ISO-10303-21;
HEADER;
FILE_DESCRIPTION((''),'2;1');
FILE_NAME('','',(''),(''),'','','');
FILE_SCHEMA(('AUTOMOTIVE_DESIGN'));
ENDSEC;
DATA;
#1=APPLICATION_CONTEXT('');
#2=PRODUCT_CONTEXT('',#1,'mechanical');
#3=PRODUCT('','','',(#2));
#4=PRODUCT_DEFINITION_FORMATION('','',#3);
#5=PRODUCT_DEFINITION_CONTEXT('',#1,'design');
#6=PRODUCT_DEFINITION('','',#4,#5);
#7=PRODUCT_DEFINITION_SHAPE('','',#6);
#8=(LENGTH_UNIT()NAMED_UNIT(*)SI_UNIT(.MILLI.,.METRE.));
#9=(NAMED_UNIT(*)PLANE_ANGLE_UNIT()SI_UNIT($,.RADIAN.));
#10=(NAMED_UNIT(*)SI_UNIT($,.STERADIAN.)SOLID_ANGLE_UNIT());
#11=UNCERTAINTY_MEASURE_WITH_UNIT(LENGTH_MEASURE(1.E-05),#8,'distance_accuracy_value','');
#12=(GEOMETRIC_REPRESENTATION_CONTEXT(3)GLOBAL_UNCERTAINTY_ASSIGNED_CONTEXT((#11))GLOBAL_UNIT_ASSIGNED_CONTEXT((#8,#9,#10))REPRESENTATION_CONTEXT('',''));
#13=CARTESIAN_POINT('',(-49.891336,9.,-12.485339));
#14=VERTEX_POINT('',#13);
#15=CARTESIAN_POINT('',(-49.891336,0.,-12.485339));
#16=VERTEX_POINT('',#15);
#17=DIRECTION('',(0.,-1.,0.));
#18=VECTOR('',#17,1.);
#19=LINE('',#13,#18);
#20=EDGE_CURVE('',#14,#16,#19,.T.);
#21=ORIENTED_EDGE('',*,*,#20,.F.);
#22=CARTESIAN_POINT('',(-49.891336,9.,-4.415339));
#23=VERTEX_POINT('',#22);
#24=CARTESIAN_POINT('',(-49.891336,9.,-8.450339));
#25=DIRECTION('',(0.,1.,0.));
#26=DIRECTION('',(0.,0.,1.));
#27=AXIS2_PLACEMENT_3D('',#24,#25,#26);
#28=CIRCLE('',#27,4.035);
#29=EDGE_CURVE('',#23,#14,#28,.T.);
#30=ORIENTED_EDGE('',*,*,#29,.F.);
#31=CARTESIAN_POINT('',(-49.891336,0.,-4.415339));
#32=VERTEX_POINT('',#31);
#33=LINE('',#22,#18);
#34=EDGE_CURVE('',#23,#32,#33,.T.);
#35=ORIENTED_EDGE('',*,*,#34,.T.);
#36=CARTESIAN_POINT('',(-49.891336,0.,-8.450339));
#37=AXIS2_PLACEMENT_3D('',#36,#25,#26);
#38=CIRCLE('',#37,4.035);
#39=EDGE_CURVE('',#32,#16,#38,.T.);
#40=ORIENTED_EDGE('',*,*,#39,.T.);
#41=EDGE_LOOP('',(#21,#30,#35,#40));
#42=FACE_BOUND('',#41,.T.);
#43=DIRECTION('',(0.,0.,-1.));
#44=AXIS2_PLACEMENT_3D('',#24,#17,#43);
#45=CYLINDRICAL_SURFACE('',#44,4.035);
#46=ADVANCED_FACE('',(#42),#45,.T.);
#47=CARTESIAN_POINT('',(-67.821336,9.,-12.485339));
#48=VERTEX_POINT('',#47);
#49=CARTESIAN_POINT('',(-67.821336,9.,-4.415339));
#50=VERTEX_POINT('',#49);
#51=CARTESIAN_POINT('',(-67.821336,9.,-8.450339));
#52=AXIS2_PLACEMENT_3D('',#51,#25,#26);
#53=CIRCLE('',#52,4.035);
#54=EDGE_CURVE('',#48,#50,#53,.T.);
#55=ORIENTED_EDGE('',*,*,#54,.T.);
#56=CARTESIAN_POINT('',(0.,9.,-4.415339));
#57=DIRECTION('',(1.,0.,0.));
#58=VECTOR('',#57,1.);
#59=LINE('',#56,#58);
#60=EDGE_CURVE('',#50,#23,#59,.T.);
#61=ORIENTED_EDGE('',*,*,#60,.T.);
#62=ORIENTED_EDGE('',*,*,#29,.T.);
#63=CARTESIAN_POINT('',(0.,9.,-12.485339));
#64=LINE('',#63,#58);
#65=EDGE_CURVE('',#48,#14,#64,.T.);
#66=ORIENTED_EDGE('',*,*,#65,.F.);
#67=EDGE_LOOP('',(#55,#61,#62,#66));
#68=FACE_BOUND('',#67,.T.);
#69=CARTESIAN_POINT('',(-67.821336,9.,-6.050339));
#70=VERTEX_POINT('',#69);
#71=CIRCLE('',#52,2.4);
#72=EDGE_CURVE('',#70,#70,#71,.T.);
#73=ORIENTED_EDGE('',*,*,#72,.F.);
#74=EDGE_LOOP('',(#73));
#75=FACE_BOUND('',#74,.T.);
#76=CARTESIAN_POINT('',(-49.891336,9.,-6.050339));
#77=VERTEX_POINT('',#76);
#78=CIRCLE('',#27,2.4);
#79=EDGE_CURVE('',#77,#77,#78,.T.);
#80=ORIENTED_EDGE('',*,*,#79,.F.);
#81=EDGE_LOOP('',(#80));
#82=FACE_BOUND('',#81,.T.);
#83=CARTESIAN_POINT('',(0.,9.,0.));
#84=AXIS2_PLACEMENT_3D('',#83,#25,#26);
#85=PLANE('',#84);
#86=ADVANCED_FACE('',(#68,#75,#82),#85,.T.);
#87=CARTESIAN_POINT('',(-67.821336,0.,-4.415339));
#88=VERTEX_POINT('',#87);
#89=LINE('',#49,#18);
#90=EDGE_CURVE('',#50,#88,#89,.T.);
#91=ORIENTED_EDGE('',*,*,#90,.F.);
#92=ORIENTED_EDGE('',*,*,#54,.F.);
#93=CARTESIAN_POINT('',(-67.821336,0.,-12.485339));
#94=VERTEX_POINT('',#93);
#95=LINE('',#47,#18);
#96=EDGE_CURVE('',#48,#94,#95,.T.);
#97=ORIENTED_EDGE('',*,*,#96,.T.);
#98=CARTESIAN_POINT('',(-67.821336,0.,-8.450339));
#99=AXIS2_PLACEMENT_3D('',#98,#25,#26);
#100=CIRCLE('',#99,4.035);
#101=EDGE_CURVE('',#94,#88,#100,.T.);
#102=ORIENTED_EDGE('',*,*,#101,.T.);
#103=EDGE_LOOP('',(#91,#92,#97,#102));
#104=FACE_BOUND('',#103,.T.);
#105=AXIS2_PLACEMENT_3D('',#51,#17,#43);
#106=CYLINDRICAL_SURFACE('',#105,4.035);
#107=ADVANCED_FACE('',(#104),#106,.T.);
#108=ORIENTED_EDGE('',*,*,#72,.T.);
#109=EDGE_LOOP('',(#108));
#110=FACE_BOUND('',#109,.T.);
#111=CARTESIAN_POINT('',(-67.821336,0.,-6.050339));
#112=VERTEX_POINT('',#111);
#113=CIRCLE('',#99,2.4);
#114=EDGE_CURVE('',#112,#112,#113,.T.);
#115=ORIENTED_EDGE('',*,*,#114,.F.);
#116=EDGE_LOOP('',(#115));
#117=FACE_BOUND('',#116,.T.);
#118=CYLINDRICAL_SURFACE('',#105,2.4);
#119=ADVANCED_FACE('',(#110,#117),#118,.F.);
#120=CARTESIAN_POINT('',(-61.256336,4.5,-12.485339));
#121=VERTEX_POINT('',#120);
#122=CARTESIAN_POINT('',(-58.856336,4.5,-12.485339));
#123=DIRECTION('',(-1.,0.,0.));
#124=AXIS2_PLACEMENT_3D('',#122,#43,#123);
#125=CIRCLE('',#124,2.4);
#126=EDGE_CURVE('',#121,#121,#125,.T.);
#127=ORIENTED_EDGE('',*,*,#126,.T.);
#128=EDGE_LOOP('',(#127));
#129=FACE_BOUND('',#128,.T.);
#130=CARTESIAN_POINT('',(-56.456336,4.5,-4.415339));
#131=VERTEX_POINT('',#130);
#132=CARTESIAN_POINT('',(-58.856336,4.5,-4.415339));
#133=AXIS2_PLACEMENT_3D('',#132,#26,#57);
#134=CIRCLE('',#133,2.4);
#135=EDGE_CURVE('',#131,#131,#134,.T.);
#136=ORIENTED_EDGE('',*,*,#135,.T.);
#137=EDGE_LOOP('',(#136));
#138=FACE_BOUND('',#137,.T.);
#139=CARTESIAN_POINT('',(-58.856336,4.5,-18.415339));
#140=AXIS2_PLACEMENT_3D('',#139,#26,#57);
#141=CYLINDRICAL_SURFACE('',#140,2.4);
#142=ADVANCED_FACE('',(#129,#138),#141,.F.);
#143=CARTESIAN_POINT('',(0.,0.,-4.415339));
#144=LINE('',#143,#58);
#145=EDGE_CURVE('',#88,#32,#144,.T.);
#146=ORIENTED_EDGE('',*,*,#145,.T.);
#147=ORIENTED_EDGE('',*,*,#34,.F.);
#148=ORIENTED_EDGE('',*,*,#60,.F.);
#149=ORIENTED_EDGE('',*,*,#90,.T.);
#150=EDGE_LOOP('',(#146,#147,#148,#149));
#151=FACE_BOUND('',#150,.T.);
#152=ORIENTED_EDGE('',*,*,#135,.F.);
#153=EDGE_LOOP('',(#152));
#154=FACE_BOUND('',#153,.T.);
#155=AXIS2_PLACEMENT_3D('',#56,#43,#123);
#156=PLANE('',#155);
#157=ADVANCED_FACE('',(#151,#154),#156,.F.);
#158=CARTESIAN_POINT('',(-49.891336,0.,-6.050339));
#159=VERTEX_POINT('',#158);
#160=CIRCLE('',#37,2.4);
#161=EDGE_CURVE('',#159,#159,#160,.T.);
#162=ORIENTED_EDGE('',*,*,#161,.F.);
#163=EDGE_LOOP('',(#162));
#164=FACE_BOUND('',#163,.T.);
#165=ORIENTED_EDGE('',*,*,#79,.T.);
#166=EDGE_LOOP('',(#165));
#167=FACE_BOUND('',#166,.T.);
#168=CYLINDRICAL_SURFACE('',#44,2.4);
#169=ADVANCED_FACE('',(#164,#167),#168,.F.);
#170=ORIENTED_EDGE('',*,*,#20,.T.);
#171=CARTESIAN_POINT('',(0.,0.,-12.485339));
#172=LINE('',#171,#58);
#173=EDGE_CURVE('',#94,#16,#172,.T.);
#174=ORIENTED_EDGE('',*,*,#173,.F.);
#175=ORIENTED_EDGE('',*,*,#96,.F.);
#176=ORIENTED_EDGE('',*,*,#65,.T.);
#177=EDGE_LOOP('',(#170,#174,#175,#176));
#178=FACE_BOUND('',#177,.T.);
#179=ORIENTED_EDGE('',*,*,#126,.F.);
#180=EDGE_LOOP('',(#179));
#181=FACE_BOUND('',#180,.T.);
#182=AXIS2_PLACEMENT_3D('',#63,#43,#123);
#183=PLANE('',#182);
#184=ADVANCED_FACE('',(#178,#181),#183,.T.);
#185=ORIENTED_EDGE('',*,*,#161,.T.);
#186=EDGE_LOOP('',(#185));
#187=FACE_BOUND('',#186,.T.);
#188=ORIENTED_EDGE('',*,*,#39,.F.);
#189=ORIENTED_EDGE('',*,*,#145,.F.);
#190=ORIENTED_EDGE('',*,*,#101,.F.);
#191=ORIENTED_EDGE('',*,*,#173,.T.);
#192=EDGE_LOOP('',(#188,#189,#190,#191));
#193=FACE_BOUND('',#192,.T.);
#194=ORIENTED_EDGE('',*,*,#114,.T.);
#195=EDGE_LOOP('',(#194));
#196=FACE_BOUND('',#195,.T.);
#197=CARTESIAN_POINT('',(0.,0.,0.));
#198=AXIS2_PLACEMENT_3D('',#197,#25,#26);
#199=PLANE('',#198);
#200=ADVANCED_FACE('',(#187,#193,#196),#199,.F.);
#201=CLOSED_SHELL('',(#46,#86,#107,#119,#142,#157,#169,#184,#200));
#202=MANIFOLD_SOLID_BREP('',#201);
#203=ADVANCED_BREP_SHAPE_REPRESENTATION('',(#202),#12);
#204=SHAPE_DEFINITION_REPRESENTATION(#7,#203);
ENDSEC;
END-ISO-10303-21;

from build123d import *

# Parameters (mm, degrees)
SKETCH1_R              = 2.4
BOSS_EXTRUDE2_DEPTH    = 9
CUT_EXTRUDE2_START     = -12.485338913
CUT_EXTRUDE2_OUTLINE_R = 2.4
CUT_EXTRUDE2_DEPTH     = 8.07


# Read off the part's stored shape, not the designer's step: Cut-Extrude2
with BuildPart() as part:
    # Sketch1 → Boss-Extrude2 (new body)
    with BuildSketch(Plane(origin=(0, 0, 0), x_dir=(1, 0, 0), z_dir=(0, 1, 0))):
        with BuildLine():
            Line((-49.891335879, 12.485338913), (-67.821335879, 12.485338913))
            ThreePointArc((-67.821335879, 12.485338913), (-70.674511741, 11.303514775), (-71.856335879, 8.450338913))
            ThreePointArc((-71.856335879, 8.450338913), (-70.674511741, 5.597163051), (-67.821335879, 4.415338913))
            Line((-67.821335879, 4.415338913), (-49.891335879, 4.415338913))
            ThreePointArc((-49.891335879, 4.415338913), (-47.038160017, 5.597163051), (-45.856335879, 8.450338913))
            ThreePointArc((-45.856335879, 8.450338913), (-47.038160017, 11.303514775), (-49.891335879, 12.485338913))
        make_face()
        with Locations(Location((-67.821335879, 8.450338913, 0), (0, 0, 270))):
            Circle(SKETCH1_R, mode=Mode.SUBTRACT)
        with Locations(Location((-49.891335879, 8.450338913, 0), (0, 0, 270))):
            Circle(SKETCH1_R, mode=Mode.SUBTRACT)
    extrude(amount=BOSS_EXTRUDE2_DEPTH)

    # Cut-Extrude2 outline → Cut-Extrude2 (cut)
    with BuildSketch(Plane.XY.offset(CUT_EXTRUDE2_START)):
        with Locations((-58.856335879, 4.5)):
            Circle(CUT_EXTRUDE2_OUTLINE_R)
    extrude(amount=CUT_EXTRUDE2_DEPTH, mode=Mode.SUBTRACT)


solid = part.part
